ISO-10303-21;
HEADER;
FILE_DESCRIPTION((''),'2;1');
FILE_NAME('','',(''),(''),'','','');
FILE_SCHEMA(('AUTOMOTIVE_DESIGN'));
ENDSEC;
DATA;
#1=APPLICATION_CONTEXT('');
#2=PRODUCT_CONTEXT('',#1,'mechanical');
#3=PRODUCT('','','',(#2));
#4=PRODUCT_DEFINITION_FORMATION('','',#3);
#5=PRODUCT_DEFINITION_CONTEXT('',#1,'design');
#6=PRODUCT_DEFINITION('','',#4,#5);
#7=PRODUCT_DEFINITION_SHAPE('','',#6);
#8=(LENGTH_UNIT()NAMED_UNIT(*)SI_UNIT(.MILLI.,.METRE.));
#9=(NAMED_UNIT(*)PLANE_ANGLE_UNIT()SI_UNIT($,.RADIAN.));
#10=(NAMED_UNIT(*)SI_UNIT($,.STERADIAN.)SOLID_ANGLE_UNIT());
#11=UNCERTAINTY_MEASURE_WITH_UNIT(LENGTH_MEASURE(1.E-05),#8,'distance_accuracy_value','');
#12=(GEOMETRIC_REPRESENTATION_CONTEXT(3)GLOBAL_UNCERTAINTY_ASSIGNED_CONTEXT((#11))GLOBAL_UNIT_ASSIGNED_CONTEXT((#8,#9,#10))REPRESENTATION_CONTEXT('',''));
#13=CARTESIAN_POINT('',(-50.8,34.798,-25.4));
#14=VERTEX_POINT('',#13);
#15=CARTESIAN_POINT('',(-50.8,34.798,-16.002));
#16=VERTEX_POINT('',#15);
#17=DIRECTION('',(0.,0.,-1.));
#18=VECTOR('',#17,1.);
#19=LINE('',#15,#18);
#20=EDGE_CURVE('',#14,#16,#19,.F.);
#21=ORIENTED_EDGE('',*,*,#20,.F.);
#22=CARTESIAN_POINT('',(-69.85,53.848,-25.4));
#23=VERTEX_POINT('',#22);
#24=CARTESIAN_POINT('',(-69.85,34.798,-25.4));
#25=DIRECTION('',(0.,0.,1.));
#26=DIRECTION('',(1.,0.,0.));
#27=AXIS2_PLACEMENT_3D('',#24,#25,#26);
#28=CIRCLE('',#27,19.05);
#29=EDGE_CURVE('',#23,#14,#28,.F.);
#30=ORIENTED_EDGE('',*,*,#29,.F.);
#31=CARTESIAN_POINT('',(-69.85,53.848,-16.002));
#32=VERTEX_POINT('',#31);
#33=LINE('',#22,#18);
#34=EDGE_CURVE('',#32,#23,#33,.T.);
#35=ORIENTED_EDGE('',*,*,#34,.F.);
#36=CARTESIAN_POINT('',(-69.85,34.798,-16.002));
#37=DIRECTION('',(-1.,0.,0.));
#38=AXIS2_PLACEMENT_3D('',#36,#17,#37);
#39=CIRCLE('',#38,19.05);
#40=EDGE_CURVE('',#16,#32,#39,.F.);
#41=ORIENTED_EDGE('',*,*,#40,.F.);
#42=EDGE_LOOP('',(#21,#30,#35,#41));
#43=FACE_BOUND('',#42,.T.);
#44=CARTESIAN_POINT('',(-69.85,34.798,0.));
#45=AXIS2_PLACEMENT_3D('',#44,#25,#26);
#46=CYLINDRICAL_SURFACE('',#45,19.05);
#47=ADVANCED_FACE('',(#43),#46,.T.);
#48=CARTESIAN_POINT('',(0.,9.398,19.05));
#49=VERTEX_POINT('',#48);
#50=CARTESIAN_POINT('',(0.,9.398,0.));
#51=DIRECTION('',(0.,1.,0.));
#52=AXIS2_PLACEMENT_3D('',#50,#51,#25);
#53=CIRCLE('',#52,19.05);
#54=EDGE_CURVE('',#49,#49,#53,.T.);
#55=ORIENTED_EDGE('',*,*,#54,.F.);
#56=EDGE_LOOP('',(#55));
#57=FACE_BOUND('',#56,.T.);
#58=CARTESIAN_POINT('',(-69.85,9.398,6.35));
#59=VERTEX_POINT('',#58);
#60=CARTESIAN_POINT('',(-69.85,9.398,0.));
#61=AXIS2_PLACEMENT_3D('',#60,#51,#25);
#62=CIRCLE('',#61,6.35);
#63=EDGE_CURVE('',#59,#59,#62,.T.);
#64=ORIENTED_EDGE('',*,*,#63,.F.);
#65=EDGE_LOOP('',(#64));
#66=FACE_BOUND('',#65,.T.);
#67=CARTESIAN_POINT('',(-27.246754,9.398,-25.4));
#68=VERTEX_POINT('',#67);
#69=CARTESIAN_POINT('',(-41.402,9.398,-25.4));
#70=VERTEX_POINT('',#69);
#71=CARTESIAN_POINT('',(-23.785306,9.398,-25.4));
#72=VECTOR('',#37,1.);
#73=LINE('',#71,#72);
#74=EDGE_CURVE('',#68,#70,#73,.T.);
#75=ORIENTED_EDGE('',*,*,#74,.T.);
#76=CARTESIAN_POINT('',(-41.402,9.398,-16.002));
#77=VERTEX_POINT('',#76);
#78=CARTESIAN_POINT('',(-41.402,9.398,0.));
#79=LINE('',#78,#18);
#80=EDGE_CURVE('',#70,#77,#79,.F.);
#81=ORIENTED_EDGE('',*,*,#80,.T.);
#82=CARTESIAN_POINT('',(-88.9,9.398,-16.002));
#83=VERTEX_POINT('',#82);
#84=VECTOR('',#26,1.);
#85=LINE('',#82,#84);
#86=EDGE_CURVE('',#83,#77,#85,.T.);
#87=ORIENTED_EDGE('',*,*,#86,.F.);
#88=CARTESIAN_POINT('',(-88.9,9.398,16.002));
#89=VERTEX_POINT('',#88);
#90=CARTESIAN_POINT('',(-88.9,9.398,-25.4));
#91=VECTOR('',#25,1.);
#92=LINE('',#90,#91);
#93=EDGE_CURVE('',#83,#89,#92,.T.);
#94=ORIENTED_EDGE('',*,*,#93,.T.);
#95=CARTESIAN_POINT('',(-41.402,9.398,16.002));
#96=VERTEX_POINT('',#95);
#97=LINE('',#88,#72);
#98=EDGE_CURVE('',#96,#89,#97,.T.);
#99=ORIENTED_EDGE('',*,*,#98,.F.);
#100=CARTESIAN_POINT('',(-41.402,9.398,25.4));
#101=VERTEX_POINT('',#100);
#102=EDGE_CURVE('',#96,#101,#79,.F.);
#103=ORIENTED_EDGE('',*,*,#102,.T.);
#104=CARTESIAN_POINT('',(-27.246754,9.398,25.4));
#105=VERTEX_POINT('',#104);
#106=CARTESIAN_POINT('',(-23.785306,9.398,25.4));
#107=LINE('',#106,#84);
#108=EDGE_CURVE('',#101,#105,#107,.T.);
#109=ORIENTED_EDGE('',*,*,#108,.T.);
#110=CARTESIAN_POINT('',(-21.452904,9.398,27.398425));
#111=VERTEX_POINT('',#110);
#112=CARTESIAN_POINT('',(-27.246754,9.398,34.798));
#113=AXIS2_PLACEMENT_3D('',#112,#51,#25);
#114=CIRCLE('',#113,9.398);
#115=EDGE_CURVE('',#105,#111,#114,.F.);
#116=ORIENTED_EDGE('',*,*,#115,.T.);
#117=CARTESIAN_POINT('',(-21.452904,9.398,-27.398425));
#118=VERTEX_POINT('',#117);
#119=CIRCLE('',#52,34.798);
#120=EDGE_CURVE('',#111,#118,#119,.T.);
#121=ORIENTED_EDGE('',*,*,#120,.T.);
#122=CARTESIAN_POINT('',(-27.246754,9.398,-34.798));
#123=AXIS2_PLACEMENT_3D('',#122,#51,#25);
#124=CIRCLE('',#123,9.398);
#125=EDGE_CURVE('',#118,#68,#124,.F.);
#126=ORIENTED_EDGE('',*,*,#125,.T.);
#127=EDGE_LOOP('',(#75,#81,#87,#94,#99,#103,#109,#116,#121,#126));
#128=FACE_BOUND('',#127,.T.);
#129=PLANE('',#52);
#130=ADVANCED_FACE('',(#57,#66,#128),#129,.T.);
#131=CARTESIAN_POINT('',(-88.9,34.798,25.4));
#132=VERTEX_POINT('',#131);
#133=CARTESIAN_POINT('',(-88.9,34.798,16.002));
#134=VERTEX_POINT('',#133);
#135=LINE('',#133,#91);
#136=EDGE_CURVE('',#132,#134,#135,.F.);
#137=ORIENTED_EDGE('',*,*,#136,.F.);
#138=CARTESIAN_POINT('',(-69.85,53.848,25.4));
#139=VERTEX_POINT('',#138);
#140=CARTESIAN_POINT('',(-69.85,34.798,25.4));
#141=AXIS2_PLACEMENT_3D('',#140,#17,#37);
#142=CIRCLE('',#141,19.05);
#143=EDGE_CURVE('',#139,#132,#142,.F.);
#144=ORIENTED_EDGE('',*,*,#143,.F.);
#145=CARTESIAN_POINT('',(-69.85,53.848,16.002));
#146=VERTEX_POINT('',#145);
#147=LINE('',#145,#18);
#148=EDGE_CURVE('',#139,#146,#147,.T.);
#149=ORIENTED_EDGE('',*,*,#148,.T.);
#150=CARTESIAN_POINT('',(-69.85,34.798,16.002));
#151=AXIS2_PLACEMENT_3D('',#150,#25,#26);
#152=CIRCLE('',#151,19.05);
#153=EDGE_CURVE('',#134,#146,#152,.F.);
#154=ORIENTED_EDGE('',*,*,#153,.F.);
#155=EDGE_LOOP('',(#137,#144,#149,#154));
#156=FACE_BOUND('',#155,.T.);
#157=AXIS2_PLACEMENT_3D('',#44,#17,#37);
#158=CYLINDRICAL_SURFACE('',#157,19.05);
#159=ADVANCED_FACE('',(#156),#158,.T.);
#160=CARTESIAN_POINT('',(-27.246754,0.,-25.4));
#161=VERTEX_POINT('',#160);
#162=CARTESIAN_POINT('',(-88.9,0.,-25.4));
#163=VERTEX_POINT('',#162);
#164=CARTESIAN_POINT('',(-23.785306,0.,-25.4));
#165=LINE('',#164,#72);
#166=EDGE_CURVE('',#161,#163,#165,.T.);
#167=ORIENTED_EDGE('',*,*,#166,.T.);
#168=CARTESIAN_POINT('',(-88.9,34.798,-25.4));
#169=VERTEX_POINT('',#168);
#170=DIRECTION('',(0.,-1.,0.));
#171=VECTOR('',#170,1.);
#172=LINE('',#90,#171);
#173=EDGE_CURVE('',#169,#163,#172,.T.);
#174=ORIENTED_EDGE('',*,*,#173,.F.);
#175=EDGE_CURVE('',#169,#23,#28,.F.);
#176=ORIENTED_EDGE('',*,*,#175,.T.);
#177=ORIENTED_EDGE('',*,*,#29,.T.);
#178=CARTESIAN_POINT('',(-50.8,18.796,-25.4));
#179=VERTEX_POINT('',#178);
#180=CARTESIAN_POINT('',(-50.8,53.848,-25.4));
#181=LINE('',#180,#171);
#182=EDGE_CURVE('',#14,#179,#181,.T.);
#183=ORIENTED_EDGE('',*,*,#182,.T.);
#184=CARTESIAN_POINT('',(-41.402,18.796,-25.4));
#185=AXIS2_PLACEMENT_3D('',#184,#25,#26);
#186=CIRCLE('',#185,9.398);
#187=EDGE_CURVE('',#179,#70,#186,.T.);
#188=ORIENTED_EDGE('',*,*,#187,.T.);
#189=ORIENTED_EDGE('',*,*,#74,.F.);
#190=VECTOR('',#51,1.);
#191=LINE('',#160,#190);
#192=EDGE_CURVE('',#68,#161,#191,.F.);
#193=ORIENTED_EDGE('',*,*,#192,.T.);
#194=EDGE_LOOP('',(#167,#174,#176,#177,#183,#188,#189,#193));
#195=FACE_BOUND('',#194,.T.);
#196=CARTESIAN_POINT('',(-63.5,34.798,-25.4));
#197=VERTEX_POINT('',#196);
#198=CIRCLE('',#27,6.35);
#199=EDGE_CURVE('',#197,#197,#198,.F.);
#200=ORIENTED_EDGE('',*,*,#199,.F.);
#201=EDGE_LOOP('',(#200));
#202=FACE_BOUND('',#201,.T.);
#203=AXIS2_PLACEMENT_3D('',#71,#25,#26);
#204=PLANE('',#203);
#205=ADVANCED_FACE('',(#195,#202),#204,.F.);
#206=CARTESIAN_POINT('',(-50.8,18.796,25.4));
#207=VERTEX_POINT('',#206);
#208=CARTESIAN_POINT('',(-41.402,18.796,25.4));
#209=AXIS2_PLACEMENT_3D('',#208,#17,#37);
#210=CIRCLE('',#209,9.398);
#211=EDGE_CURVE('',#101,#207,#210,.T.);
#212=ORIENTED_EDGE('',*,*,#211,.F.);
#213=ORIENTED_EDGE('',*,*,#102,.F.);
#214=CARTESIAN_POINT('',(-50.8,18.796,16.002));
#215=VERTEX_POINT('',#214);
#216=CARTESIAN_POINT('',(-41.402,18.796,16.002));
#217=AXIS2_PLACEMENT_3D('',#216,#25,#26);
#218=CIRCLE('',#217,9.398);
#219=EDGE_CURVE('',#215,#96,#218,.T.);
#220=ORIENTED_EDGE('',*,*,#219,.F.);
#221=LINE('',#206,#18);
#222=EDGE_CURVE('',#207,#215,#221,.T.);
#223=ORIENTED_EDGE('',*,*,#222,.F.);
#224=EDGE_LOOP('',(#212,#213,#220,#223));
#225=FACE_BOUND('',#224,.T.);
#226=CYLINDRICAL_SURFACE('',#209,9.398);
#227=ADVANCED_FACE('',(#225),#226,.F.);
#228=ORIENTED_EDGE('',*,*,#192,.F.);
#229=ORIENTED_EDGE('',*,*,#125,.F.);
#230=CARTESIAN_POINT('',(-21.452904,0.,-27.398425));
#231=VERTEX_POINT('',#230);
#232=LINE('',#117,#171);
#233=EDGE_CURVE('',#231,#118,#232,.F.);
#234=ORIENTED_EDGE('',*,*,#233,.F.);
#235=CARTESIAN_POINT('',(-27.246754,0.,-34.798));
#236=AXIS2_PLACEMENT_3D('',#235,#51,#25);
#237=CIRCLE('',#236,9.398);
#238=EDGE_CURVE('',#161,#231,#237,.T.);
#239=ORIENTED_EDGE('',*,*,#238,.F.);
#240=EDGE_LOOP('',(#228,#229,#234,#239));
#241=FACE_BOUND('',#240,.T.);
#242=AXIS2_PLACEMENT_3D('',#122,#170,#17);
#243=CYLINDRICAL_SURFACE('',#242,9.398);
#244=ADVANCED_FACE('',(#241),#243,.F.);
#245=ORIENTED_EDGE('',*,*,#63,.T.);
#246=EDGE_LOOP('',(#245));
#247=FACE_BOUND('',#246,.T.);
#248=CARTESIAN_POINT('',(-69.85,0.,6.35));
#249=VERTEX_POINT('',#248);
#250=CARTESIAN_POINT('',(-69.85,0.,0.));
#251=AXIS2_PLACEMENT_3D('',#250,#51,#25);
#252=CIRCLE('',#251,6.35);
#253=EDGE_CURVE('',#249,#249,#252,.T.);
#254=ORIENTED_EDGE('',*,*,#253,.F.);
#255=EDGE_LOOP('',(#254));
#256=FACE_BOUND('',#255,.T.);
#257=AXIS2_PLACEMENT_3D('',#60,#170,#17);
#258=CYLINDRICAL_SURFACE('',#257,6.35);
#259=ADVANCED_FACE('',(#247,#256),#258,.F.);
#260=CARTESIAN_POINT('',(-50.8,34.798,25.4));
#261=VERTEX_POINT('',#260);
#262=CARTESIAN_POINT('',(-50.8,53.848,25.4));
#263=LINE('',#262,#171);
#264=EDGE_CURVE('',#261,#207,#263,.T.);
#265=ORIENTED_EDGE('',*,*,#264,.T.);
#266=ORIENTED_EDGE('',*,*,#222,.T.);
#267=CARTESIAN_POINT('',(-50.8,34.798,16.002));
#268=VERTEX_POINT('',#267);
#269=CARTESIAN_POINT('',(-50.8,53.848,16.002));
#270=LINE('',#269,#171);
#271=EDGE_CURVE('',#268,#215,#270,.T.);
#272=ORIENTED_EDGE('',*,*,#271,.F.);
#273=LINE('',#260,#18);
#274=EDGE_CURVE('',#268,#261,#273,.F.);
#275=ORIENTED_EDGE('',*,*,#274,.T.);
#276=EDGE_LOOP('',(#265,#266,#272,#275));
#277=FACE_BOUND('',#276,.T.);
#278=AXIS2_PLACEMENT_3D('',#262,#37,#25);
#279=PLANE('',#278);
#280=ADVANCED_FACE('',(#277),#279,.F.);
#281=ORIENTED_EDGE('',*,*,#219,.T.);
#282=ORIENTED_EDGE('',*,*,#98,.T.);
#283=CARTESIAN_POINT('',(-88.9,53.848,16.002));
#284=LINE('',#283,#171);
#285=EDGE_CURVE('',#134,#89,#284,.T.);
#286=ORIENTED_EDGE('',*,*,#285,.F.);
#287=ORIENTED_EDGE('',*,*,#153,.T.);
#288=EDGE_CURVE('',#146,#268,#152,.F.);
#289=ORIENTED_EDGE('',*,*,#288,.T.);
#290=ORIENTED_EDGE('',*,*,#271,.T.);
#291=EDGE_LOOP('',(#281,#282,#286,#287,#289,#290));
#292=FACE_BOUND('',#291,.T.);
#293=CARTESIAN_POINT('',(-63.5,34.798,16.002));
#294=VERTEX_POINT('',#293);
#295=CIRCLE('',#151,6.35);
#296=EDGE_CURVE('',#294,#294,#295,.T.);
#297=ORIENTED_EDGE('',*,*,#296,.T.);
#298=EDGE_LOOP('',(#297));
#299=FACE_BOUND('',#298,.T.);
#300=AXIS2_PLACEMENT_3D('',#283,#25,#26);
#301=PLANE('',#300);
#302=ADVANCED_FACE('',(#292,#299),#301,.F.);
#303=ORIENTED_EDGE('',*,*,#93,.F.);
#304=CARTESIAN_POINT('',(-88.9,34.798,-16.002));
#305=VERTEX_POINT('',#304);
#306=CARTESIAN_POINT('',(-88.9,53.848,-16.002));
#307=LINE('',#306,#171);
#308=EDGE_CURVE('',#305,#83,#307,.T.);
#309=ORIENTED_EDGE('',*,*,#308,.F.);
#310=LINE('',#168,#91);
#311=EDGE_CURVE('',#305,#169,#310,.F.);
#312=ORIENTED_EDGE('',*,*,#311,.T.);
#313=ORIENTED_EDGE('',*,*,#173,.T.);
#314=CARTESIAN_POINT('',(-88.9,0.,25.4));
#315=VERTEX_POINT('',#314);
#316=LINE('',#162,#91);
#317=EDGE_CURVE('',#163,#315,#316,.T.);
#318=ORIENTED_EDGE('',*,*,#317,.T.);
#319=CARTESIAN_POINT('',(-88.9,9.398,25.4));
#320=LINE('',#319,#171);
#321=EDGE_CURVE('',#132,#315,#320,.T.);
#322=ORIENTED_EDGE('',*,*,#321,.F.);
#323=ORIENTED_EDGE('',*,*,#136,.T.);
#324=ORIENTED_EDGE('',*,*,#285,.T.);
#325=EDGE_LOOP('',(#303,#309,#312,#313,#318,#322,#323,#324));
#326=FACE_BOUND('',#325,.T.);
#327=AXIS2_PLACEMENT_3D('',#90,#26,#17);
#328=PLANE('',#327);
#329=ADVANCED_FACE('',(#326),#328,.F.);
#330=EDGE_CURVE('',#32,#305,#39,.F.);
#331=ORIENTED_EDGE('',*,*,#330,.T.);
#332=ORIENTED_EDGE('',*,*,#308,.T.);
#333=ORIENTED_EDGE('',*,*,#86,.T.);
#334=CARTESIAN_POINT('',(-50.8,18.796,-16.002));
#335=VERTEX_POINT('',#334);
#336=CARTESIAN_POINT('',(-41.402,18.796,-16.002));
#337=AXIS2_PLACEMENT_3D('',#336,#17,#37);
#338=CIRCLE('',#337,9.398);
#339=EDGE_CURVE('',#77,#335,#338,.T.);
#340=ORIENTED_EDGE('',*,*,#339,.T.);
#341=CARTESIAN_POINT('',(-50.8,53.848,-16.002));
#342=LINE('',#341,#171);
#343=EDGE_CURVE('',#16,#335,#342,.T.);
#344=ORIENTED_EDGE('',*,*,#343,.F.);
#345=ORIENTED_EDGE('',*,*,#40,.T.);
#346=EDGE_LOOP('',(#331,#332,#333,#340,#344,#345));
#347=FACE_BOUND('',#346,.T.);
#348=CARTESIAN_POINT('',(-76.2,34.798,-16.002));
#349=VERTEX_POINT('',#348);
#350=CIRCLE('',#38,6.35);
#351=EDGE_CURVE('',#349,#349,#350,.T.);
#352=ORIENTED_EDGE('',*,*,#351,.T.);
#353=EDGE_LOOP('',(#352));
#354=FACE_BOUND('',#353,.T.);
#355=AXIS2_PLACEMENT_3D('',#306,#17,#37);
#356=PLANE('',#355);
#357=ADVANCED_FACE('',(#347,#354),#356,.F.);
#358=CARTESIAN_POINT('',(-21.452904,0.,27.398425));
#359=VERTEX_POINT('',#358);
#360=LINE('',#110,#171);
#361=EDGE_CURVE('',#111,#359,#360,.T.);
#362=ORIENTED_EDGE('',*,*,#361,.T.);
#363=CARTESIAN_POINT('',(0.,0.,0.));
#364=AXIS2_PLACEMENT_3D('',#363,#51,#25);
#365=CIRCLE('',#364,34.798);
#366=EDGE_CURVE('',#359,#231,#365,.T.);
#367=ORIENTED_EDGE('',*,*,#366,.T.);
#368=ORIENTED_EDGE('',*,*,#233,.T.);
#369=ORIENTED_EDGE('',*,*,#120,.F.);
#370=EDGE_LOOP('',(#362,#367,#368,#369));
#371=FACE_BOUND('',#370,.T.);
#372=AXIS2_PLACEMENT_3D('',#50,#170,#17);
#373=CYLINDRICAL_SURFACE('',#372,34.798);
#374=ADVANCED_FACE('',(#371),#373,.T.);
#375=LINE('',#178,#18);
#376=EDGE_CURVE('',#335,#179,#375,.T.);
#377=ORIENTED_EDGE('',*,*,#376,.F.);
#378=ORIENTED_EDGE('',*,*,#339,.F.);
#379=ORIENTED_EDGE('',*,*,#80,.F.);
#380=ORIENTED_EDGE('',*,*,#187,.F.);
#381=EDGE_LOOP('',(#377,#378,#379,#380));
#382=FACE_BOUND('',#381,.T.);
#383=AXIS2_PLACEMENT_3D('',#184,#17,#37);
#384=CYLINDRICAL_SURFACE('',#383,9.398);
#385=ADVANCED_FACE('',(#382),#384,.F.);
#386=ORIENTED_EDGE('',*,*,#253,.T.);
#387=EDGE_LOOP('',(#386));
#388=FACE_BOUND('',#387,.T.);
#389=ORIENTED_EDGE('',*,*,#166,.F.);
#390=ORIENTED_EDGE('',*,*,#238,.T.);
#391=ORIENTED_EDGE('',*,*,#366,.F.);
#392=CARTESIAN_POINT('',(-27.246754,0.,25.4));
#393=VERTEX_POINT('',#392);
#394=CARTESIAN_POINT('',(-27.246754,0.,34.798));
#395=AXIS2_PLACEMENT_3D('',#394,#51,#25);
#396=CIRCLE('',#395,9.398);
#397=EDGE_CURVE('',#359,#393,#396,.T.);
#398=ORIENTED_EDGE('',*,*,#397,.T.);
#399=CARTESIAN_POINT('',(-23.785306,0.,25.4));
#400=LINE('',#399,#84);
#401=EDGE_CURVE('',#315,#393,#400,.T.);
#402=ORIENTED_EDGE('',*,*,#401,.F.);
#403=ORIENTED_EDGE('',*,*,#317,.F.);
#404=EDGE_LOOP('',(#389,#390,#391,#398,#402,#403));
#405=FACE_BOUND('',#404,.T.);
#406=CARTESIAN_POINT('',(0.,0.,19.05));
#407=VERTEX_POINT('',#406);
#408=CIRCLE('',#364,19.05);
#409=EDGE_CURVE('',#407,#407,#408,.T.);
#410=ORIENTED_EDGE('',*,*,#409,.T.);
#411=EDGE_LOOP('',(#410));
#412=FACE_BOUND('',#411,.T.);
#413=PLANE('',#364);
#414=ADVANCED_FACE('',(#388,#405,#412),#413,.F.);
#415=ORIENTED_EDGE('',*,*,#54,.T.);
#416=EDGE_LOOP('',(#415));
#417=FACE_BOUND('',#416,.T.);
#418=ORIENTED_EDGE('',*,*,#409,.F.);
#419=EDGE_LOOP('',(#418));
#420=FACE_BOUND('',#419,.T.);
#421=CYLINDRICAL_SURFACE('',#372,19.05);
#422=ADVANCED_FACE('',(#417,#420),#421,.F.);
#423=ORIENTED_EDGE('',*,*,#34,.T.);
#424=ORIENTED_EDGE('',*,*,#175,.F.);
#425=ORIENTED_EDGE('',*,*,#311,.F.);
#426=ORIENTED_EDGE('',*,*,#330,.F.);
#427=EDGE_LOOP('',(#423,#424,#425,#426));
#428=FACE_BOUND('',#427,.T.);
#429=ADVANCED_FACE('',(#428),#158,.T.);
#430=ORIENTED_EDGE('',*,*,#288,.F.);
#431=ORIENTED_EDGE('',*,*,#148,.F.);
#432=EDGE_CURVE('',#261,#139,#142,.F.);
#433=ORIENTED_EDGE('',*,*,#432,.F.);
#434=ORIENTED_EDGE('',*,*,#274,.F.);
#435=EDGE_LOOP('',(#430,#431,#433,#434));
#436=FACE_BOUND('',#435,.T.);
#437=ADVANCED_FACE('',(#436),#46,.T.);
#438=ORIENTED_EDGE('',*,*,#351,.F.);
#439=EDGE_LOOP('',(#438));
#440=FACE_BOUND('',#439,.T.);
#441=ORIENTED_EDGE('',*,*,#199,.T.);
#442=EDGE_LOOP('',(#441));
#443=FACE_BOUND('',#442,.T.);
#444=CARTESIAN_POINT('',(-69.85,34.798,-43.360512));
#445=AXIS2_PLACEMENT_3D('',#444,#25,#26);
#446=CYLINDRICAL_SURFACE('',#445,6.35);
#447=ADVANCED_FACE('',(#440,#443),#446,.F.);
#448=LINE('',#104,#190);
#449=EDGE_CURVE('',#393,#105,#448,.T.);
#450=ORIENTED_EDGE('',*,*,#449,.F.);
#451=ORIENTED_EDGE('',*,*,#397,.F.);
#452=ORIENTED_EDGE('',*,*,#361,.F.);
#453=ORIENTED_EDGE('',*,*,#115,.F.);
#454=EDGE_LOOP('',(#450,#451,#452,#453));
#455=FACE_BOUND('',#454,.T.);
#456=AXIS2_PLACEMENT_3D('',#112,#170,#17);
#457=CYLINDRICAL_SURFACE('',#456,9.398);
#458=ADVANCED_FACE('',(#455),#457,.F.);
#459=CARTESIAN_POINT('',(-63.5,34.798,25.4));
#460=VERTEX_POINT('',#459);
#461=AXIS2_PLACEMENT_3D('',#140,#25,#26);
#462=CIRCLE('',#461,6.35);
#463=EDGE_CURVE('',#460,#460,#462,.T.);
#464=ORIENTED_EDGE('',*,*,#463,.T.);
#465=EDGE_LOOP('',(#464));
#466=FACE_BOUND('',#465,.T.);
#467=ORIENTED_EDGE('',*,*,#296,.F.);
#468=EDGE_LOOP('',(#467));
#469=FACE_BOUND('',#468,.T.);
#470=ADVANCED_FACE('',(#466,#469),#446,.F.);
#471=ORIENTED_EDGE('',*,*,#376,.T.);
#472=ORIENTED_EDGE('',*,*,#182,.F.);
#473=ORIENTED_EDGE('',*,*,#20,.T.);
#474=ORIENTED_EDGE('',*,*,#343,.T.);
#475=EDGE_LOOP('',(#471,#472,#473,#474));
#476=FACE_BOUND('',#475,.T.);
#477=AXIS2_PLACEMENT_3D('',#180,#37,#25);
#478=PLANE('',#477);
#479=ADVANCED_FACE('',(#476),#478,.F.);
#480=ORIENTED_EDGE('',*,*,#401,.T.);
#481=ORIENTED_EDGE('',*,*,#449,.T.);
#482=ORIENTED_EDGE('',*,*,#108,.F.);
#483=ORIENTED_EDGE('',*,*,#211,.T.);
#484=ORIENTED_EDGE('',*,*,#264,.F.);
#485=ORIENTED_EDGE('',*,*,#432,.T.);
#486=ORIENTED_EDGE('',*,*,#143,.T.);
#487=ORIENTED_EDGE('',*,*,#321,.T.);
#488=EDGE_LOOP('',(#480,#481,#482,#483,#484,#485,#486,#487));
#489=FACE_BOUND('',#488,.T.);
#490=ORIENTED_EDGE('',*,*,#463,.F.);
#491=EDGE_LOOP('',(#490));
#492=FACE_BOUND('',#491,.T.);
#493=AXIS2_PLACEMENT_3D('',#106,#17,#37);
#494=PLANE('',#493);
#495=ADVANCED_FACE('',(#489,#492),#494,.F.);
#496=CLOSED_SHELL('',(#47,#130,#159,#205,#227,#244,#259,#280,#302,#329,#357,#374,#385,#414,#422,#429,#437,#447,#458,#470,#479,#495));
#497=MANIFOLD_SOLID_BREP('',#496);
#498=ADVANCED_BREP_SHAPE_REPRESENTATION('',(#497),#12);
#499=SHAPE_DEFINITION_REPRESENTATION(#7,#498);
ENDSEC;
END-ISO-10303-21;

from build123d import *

# Parameters (mm, degrees)
SKETCH1_R           = 19.05
SKETCH1_R_2         = 6.35
BOSS_EXTRUDE1_DEPTH = 9.398
SKETCH4_W           = 38.1
SKETCH4_H           = 9.398
BOSS_EXTRUDE3_DEPTH = 44.45
FILLET1_R           = 19.05
FILLET2_R           = 9.398
CUT_EXTRUDE1_REACH  = 122.111
SKETCH6_R           = 6.35


with BuildPart() as part:
    # Sketch1 → Boss-Extrude1 (new body)
    with BuildSketch(Plane(origin=(0, 0, 0), x_dir=(1, 0, 0), z_dir=(0, 1, 0))):
        with BuildLine():
            Line((-23.785306473, 25.4), (-88.9, 25.4))
            Line((-88.9, 25.4), (-88.9, -25.4))
            Line((-88.9, -25.4), (-23.785306473, -25.4))
            ThreePointArc((-23.785306473, -25.4), (34.798, 0), (-23.785306473, 25.4))
        make_face()
        with Locations(Location((0, 0, 0), (0, 0, 270))):
            Circle(SKETCH1_R, mode=Mode.SUBTRACT)
        with Locations(Location((-69.85, 0, 0), (0, 0, 270))):
            Circle(SKETCH1_R_2, mode=Mode.SUBTRACT)
    extrude(amount=BOSS_EXTRUDE1_DEPTH)

    # Sketch4 → Boss-Extrude3 (add)
    with BuildSketch(Plane(origin=(0, 9.398, 0), x_dir=(1, 0, 0), z_dir=(0, 1, 0))):
        with Locations((-69.85, 20.701)):
            Rectangle(SKETCH4_W, SKETCH4_H)
        with Locations((-69.85, -20.701)):
            Rectangle(SKETCH4_W, SKETCH4_H)
    extrude(amount=BOSS_EXTRUDE3_DEPTH)

    # Fillet1
    fillet1_edges = [part.edges().sort_by_distance(p)[0] for p in [
        (-88.9, 53.848, 20.701),
        (-88.9, 53.848, -20.701),
        (-50.8, 53.848, -20.701),
        (-50.8, 53.848, 20.701),
    ]]
    fillet(fillet1_edges, radius=FILLET1_R - 0.0001)  # a hair under: the kernel refuses the full size

    # Fillet2
    fillet2_edges = [part.edges().sort_by_distance(p)[0] for p in [
        (-23.785306473, 4.699, 25.4),
        (-23.785306473, 4.699, -25.4),
        (-50.8, 9.398, -20.701),
        (-50.8, 9.398, 20.701),
    ]]
    fillet(fillet2_edges, radius=FILLET2_R)

    # Cut-Extrude1: up to this face of the body (flat: up to its plane)
    cut_extrude1_end = Plane(part.part.faces().sort_by_distance((-66.468021602, 22.831221423, -25.4))[0])
    # Sketch6 → Cut-Extrude1 (cut, up to the picked face)
    with BuildSketch(Plane.XY.offset(25.4), mode=Mode.PRIVATE) as cut_extrude1_sk1:
        with Locations((-69.85, 34.798)):
            Circle(SKETCH6_R)
    cut_extrude1_tool1 = split(extrude(cut_extrude1_sk1.sketch, amount=-CUT_EXTRUDE1_REACH, mode=Mode.PRIVATE), bisect_by=cut_extrude1_end, keep=Keep.BOTH, mode=Mode.PRIVATE)
    add(cut_extrude1_tool1.solids().sort_by(Axis((-69.85, 34.798, 25.4), (0, 0, -1)))[0], mode=Mode.SUBTRACT)


solid = part.part
